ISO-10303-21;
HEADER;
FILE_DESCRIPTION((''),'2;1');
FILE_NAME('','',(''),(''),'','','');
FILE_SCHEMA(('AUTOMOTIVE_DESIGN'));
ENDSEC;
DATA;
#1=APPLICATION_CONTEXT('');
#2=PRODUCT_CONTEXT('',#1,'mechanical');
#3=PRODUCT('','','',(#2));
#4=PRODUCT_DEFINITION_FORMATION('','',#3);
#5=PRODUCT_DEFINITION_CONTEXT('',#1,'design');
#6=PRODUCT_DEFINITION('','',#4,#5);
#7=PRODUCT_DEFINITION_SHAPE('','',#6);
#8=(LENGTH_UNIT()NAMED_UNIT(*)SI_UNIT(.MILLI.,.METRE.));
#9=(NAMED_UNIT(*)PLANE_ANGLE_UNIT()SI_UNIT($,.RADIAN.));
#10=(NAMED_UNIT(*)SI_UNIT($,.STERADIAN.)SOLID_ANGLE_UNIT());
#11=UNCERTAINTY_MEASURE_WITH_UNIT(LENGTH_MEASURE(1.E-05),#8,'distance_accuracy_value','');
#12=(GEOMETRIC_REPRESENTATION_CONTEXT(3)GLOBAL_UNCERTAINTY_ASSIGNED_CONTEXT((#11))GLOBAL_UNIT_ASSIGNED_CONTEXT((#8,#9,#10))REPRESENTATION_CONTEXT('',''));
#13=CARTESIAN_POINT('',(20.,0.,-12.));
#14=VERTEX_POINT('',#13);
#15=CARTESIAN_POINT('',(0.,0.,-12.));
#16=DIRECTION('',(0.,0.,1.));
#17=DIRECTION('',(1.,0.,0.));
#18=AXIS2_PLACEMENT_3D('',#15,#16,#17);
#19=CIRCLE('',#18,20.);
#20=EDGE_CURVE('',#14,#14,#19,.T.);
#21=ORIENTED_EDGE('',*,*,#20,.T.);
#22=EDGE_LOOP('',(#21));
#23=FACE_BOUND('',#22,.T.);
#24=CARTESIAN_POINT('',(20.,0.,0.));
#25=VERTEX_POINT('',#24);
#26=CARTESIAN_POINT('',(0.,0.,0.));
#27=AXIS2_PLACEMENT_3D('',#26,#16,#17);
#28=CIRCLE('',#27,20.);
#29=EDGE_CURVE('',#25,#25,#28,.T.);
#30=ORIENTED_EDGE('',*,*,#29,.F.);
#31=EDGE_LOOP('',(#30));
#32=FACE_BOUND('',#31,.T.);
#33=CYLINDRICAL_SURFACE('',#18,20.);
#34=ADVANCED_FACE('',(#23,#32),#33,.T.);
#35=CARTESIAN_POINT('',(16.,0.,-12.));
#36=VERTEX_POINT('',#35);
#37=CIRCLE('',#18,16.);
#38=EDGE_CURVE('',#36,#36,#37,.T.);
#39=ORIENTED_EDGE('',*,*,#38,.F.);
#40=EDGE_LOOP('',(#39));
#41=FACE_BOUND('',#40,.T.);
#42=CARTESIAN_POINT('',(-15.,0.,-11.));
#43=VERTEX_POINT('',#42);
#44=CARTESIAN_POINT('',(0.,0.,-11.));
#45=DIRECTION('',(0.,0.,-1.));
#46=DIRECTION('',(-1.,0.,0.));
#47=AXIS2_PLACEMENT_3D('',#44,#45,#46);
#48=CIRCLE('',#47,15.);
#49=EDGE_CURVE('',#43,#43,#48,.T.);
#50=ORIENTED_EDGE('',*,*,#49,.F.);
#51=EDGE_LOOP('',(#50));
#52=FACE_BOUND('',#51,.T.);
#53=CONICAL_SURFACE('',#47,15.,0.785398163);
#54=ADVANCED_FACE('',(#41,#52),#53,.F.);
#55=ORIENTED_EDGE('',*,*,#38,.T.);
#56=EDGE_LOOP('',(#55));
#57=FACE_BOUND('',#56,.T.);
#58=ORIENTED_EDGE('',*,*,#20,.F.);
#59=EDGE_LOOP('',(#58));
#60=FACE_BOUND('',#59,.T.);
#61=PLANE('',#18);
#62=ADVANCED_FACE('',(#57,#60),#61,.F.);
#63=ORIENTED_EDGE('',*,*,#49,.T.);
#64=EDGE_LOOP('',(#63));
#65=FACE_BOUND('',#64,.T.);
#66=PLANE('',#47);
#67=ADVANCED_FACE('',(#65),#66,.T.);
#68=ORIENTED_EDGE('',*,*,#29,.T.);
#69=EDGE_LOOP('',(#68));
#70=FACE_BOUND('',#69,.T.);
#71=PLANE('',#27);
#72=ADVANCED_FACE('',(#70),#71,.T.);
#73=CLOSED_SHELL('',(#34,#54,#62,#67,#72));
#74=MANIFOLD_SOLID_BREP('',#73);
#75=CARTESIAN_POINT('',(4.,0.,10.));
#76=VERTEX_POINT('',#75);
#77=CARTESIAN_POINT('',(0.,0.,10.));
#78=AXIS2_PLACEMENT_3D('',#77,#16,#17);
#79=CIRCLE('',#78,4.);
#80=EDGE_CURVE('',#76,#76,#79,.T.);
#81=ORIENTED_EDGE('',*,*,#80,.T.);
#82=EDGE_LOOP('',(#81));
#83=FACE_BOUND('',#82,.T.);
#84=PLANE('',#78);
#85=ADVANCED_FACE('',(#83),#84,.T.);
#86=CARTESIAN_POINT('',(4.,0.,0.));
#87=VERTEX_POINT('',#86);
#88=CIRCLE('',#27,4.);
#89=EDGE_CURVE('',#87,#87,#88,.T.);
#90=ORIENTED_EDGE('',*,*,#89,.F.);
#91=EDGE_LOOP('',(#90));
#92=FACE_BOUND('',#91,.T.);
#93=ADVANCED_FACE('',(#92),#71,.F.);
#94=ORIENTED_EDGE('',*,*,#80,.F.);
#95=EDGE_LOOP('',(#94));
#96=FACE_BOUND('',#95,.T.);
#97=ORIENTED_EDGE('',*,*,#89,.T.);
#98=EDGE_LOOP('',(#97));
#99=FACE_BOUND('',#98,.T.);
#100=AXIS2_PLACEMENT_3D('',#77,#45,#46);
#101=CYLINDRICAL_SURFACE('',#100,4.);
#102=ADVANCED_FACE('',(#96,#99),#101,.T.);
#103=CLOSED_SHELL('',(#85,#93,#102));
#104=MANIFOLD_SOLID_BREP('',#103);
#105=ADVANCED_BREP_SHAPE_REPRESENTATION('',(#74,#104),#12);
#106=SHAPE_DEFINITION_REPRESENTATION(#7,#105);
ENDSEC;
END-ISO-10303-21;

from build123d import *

# Parameters (mm, degrees)
SKETCH1_R          = 20
FOOT_BODY_DEPTH    = 12
SKETCH2_R          = 4
M8_STUD_DEPTH      = 10
SKETCH3_R          = 15
CUT_EXTRUDE1_DEPTH = 1
CHAMFER1_SIZE      = 1


with BuildPart() as part:
    # Sketch1 → FOOT_BODY (new body)
    with BuildSketch(Plane.XY):
        Circle(SKETCH1_R)
    extrude(amount=-FOOT_BODY_DEPTH)

    # Sketch3 → Cut-Extrude1 (cut)
    with BuildSketch(Plane(origin=(0, 0, -12), x_dir=(-1, 0, 0), z_dir=(0, 0, -1))):
        Circle(SKETCH3_R)
    extrude(amount=-CUT_EXTRUDE1_DEPTH, mode=Mode.SUBTRACT)

    # Chamfer1
    chamfer1_edges = [part.edges().sort_by_distance(p)[0] for p in [
        (15, 0, -12),
    ]]
    chamfer(chamfer1_edges, length=CHAMFER1_SIZE - 0.0001)  # a hair under: the kernel refuses the full size


with BuildPart() as body_2:
    # Sketch2 → M8_STUD (new body)
    with BuildSketch(Plane.XY):
        Circle(SKETCH2_R)
    extrude(amount=M8_STUD_DEPTH)


solid = Compound([part.part, body_2.part])
